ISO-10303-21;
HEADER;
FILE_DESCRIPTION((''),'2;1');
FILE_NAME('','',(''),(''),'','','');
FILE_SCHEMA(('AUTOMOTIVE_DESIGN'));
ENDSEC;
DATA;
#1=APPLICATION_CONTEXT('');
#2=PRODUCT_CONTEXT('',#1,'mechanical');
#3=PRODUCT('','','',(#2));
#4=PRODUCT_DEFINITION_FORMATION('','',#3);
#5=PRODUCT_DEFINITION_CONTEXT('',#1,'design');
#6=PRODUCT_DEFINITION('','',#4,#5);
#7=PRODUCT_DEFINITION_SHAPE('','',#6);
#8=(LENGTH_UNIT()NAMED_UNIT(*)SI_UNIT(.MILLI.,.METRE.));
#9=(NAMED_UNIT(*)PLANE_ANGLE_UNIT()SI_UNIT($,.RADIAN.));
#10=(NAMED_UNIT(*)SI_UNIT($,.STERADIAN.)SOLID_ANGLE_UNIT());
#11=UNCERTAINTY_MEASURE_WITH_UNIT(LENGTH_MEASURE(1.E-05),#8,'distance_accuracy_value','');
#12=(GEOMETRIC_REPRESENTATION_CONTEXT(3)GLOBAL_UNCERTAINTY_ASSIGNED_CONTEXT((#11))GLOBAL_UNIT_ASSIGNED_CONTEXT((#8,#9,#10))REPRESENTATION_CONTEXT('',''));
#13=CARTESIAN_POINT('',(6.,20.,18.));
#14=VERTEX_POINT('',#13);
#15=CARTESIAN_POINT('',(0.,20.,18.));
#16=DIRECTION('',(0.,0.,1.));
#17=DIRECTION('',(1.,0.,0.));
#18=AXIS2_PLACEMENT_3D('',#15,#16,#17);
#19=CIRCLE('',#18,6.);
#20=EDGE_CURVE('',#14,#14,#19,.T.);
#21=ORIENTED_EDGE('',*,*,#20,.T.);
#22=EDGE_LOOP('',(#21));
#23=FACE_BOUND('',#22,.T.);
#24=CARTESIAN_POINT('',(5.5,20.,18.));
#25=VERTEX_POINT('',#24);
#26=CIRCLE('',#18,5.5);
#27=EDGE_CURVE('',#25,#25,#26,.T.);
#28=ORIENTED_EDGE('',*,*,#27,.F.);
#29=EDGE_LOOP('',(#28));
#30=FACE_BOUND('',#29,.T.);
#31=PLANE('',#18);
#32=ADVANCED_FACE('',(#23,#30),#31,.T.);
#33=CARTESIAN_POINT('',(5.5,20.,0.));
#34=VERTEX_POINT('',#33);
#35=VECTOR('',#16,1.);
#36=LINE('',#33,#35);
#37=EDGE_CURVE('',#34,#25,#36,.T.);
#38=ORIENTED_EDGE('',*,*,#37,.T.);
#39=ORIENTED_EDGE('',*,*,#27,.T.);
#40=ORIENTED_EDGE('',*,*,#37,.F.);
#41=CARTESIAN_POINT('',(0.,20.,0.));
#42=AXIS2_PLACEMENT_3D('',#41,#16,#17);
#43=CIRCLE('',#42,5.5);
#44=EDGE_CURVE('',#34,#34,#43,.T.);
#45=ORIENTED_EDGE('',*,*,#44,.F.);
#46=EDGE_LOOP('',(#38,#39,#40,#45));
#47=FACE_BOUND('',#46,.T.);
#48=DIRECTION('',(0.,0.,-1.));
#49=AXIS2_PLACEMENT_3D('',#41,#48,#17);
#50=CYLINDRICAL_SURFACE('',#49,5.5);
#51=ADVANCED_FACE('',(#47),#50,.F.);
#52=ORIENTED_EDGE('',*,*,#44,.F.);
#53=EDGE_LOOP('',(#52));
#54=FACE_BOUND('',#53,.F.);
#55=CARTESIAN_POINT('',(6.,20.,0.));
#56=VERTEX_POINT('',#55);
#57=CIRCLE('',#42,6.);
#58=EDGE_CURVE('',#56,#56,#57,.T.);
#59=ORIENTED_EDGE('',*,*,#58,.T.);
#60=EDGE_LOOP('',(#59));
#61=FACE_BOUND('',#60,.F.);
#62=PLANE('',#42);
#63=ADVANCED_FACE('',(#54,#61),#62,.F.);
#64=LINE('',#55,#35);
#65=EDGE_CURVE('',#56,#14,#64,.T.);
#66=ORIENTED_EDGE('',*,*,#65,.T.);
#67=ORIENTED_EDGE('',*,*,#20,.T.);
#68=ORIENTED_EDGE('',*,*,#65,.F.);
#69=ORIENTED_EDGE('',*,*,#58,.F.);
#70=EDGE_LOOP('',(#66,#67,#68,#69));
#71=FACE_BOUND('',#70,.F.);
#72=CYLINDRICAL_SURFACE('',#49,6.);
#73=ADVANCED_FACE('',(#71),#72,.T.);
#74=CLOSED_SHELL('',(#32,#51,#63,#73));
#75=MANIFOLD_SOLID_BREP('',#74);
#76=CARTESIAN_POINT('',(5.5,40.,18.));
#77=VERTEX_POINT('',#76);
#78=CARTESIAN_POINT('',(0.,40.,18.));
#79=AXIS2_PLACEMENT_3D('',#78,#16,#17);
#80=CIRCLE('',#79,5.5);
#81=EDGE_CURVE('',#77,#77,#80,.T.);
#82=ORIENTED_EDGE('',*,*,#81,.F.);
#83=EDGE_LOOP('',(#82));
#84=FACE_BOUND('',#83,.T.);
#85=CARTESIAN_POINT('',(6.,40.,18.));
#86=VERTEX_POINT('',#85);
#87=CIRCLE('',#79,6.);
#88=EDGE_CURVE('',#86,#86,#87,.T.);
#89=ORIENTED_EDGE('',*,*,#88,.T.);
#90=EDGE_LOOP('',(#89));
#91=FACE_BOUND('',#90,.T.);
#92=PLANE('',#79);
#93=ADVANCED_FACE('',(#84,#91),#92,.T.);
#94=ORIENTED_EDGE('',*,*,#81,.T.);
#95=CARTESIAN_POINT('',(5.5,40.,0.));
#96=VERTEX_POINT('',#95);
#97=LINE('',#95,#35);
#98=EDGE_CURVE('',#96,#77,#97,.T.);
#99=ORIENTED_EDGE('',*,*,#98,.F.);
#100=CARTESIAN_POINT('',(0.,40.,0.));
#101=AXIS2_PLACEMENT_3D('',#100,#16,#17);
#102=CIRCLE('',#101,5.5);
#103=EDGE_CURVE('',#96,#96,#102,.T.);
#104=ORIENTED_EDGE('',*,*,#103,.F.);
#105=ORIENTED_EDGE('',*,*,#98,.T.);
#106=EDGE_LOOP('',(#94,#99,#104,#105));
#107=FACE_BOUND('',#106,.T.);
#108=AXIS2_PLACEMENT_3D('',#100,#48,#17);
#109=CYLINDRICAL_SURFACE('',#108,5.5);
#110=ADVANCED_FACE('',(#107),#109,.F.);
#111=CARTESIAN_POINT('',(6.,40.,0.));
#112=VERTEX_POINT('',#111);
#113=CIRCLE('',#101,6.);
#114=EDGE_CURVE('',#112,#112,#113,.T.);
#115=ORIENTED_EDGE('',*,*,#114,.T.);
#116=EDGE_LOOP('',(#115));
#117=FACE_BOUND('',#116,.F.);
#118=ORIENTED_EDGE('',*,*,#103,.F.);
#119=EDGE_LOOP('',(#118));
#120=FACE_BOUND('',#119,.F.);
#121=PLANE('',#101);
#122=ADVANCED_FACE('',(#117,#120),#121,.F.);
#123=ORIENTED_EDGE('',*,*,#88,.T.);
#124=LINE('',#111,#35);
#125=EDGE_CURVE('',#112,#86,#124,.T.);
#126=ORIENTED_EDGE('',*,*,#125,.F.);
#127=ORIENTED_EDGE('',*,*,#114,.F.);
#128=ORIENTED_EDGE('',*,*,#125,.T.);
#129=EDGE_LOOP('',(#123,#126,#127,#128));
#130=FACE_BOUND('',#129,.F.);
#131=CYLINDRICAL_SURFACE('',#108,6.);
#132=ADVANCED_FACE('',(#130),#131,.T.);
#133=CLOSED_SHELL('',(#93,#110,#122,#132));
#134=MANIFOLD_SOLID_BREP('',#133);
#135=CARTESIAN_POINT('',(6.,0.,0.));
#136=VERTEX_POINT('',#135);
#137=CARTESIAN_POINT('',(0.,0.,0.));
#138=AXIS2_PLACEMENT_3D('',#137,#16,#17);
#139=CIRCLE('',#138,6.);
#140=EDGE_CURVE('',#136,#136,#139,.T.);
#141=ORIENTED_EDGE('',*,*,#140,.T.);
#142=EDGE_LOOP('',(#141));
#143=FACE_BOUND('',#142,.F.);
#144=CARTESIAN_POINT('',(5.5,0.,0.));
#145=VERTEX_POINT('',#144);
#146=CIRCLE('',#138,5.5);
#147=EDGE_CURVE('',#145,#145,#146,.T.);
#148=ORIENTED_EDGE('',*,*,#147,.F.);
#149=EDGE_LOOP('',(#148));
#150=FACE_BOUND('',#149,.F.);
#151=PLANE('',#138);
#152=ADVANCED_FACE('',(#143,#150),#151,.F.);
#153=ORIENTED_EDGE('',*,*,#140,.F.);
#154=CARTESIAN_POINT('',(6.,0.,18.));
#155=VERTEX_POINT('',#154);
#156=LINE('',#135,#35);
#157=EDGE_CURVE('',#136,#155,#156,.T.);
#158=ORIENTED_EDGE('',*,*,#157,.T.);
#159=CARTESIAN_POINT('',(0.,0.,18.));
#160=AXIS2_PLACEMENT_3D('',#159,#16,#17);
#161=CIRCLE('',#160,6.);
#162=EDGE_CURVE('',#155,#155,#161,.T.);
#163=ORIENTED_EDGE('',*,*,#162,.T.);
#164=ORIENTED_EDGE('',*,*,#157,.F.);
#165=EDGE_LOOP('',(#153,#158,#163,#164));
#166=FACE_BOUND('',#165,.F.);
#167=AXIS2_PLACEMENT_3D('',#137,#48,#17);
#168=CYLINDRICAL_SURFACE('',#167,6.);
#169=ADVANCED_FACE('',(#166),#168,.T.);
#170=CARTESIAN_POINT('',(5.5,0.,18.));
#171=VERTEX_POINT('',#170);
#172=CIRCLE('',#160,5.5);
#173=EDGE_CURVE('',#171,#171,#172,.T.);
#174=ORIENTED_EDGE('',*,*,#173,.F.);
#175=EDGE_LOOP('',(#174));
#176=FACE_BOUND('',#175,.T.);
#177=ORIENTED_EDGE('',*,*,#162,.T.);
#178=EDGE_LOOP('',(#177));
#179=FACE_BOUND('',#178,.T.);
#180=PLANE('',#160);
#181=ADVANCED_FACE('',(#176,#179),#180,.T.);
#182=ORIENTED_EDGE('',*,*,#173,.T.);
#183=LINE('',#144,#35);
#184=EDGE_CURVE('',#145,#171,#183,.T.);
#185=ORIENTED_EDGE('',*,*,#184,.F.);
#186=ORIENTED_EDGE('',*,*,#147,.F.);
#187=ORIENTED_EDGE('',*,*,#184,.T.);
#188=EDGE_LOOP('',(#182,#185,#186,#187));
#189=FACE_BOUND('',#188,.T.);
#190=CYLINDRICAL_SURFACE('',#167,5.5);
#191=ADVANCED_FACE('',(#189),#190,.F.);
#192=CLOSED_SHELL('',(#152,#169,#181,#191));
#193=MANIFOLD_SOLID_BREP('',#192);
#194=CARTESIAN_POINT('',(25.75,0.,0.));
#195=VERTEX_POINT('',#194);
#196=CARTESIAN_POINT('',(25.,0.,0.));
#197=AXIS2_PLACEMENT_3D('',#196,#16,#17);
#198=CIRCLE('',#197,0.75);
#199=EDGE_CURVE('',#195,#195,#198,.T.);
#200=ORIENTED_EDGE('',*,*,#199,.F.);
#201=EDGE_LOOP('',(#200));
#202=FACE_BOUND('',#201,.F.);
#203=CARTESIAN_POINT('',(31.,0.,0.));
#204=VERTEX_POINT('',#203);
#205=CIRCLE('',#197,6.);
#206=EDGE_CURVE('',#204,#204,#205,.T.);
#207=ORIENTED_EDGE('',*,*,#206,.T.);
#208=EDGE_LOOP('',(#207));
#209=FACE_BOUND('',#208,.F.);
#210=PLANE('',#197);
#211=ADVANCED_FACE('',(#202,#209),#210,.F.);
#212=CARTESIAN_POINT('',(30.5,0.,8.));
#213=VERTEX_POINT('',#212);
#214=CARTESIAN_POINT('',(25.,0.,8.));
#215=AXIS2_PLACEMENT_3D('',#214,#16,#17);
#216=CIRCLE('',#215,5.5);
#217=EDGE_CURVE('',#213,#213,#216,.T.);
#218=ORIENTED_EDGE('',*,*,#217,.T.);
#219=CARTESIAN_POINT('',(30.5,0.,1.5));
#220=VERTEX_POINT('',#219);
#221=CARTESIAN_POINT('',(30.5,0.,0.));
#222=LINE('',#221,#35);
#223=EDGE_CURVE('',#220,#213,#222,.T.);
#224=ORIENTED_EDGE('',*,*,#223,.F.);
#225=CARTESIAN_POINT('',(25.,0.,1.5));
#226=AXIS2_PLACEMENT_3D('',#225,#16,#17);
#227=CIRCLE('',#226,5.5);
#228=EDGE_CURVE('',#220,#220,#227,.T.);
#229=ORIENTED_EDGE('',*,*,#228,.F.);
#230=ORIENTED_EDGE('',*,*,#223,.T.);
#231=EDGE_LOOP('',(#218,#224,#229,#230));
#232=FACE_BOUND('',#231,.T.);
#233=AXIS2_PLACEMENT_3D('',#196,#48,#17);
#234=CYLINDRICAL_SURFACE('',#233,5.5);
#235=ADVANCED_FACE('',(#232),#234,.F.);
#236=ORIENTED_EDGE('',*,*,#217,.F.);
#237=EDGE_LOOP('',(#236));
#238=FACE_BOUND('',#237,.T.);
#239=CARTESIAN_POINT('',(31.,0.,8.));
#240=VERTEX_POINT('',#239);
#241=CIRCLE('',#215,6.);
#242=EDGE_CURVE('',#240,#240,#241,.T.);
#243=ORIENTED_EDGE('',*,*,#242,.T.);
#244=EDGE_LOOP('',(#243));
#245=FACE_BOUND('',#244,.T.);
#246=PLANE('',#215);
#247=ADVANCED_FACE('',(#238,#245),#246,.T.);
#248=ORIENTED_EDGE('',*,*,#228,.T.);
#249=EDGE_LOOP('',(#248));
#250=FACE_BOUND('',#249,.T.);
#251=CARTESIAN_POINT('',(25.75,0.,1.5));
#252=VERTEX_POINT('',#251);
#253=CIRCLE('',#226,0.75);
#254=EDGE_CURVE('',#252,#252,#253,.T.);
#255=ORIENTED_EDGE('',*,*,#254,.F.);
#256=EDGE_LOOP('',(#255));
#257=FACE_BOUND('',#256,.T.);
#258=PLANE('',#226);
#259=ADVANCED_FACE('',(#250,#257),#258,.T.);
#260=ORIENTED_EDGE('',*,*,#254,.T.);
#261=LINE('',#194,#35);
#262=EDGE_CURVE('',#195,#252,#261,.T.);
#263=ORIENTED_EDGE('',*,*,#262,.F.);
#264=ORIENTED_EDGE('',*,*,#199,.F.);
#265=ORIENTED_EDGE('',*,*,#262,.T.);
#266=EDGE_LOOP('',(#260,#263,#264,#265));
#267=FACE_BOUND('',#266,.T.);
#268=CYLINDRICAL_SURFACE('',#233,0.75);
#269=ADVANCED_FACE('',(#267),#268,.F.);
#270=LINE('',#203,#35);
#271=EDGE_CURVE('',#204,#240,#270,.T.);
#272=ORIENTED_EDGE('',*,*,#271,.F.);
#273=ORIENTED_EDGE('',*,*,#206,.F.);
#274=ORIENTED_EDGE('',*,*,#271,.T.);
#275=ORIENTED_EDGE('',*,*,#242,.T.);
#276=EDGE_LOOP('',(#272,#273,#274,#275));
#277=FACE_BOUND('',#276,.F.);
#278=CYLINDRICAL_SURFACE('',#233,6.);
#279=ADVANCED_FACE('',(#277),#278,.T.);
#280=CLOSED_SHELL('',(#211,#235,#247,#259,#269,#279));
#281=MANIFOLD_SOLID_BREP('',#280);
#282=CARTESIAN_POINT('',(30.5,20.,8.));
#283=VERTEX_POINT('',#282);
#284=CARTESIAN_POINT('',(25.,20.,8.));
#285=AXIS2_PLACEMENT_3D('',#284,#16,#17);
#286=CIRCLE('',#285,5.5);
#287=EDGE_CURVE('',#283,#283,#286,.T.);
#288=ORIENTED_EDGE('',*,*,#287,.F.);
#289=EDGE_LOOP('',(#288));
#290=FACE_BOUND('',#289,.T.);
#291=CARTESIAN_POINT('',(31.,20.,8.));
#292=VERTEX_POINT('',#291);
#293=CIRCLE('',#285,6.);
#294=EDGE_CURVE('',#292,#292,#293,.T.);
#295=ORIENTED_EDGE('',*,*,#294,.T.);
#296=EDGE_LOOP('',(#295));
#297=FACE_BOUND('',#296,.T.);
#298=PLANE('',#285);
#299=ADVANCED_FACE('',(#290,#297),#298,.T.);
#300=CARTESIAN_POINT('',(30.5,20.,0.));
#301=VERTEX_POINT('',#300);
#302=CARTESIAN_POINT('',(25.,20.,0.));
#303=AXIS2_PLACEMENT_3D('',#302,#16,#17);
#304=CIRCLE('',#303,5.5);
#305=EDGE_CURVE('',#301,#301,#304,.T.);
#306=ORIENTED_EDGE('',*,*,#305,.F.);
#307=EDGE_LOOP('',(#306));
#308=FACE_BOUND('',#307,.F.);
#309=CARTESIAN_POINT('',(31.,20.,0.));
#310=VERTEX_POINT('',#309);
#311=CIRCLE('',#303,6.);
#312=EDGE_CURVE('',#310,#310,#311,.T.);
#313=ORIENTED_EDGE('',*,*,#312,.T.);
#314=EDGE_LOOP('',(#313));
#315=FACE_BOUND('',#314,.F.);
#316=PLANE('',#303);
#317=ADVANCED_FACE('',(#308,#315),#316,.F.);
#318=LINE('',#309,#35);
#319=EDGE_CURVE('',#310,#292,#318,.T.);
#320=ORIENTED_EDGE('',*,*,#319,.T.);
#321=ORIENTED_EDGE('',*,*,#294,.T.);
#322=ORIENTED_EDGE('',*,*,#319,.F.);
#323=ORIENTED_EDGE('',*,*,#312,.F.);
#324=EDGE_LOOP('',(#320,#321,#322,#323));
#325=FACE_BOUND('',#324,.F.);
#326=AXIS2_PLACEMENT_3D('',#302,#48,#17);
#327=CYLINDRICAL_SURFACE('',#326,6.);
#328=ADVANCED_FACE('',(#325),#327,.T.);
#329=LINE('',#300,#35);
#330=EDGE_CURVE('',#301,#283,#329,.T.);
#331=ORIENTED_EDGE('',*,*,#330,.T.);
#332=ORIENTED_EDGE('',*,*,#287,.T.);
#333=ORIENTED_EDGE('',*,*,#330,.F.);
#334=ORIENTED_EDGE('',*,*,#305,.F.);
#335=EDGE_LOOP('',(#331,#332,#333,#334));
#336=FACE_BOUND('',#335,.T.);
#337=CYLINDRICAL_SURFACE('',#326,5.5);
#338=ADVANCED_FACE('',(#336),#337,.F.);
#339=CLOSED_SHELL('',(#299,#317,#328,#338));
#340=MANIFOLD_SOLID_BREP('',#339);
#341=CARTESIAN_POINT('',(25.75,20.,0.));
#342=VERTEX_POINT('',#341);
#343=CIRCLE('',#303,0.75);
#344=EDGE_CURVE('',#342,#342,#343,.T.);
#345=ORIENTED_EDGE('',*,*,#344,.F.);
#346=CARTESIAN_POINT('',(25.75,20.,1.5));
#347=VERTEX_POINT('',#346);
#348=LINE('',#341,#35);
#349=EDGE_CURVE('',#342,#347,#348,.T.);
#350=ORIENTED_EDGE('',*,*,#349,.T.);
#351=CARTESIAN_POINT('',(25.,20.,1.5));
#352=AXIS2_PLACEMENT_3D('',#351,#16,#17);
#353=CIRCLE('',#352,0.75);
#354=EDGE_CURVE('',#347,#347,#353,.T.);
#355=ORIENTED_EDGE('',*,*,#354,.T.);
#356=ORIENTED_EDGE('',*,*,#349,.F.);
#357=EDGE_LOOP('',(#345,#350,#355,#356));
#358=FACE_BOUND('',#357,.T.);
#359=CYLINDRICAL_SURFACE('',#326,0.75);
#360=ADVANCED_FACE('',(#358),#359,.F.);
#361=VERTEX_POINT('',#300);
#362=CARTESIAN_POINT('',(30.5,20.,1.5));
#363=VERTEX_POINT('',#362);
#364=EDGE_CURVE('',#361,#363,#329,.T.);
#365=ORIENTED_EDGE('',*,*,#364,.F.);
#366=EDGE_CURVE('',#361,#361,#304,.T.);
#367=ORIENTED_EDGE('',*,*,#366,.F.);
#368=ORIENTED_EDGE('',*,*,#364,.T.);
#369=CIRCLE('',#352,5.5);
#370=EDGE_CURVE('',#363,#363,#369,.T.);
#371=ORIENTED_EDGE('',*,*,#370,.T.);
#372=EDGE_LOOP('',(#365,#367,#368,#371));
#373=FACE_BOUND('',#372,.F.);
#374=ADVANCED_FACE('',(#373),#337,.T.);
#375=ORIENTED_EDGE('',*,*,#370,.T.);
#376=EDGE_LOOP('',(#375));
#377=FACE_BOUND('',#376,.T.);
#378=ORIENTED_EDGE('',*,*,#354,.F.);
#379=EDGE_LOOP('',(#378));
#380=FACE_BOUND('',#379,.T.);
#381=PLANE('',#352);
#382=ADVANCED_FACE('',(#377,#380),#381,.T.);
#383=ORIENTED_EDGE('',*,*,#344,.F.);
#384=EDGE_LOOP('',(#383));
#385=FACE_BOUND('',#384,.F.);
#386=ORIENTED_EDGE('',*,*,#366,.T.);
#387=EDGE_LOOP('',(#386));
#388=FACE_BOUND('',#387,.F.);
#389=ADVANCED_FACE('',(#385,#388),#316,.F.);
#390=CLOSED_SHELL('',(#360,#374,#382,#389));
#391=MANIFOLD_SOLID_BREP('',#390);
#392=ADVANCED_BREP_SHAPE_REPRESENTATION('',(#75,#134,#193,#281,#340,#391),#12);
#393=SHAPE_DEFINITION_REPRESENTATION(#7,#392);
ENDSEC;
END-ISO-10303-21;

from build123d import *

# Parameters (mm, degrees)
F0_R     = 6
F0_R_2   = 5.5
F1_DEPTH = 18
F2_DEPTH = 8
F0_R_3   = 2.4
F0_R_4   = 1.9
F0_R_5   = 0.75
F3_DEPTH = 1.5


with BuildPart() as f1:
    # F0 (on Top) → F1 (new body)
    with BuildSketch(Plane.XY):
        Circle(F0_R)
        Circle(F0_R_2, mode=Mode.SUBTRACT)
    extrude(amount=F1_DEPTH)


with BuildPart() as f1b:
    # F0 (on Top) → F1, piece 2 (new body)
    with BuildSketch(Plane.XY):
        with Locations((0, 20)):
            Circle(F0_R)
        with Locations((0, 20)):
            Circle(F0_R_2, mode=Mode.SUBTRACT)
    extrude(amount=F1_DEPTH)


with BuildPart() as f1c:
    # F0 (on Top) → F1, piece 3 (new body)
    with BuildSketch(Plane.XY):
        with Locations((0, 40)):
            Circle(F0_R)
        with Locations((0, 40)):
            Circle(F0_R_2, mode=Mode.SUBTRACT)
    extrude(amount=F1_DEPTH)


with BuildPart() as f2:
    # F0 (on Top) → F2 (new body)
    with BuildSketch(Plane.XY):
        with Locations((25, 0)):
            Circle(F0_R)
        with Locations((25, 0)):
            Circle(F0_R_2, mode=Mode.SUBTRACT)
    extrude(amount=F2_DEPTH)

    # F0 (on Top) → F3 (join)
    with BuildSketch(Plane.XY):
        with Locations((25, 0)):
            Circle(F0_R_2)
        with Locations((25, 0)):
            Circle(F0_R_3, mode=Mode.SUBTRACT)
        with Locations((25, 0)):
            Circle(F0_R_3)
        with Locations((25, 0)):
            Circle(F0_R_4, mode=Mode.SUBTRACT)
        with Locations((25, 0)):
            Circle(F0_R_4)
        with Locations((25, 0)):
            Circle(F0_R_5, mode=Mode.SUBTRACT)
    extrude(amount=F3_DEPTH)


with BuildPart() as f2b:
    # F0 (on Top) → F2, piece 2 (new body)
    with BuildSketch(Plane.XY):
        with Locations((25, 20)):
            Circle(F0_R)
        with Locations((25, 20)):
            Circle(F0_R_2, mode=Mode.SUBTRACT)
    extrude(amount=F2_DEPTH)


with BuildPart() as f3:
    # F0 (on Top) → F3, piece 2 (new body)
    with BuildSketch(Plane.XY):
        with Locations((25, 20)):
            Circle(F0_R_2)
        with Locations((25, 20)):
            Circle(F0_R_3, mode=Mode.SUBTRACT)
        with Locations((25, 20)):
            Circle(F0_R_3)
        with Locations((25, 20)):
            Circle(F0_R_4, mode=Mode.SUBTRACT)
        with Locations((25, 20)):
            Circle(F0_R_4)
        with Locations((25, 20)):
            Circle(F0_R_5, mode=Mode.SUBTRACT)
    extrude(amount=F3_DEPTH)


solid = Compound([f1.part, f1b.part, f1c.part, f2.part, f2b.part, f3.part])
